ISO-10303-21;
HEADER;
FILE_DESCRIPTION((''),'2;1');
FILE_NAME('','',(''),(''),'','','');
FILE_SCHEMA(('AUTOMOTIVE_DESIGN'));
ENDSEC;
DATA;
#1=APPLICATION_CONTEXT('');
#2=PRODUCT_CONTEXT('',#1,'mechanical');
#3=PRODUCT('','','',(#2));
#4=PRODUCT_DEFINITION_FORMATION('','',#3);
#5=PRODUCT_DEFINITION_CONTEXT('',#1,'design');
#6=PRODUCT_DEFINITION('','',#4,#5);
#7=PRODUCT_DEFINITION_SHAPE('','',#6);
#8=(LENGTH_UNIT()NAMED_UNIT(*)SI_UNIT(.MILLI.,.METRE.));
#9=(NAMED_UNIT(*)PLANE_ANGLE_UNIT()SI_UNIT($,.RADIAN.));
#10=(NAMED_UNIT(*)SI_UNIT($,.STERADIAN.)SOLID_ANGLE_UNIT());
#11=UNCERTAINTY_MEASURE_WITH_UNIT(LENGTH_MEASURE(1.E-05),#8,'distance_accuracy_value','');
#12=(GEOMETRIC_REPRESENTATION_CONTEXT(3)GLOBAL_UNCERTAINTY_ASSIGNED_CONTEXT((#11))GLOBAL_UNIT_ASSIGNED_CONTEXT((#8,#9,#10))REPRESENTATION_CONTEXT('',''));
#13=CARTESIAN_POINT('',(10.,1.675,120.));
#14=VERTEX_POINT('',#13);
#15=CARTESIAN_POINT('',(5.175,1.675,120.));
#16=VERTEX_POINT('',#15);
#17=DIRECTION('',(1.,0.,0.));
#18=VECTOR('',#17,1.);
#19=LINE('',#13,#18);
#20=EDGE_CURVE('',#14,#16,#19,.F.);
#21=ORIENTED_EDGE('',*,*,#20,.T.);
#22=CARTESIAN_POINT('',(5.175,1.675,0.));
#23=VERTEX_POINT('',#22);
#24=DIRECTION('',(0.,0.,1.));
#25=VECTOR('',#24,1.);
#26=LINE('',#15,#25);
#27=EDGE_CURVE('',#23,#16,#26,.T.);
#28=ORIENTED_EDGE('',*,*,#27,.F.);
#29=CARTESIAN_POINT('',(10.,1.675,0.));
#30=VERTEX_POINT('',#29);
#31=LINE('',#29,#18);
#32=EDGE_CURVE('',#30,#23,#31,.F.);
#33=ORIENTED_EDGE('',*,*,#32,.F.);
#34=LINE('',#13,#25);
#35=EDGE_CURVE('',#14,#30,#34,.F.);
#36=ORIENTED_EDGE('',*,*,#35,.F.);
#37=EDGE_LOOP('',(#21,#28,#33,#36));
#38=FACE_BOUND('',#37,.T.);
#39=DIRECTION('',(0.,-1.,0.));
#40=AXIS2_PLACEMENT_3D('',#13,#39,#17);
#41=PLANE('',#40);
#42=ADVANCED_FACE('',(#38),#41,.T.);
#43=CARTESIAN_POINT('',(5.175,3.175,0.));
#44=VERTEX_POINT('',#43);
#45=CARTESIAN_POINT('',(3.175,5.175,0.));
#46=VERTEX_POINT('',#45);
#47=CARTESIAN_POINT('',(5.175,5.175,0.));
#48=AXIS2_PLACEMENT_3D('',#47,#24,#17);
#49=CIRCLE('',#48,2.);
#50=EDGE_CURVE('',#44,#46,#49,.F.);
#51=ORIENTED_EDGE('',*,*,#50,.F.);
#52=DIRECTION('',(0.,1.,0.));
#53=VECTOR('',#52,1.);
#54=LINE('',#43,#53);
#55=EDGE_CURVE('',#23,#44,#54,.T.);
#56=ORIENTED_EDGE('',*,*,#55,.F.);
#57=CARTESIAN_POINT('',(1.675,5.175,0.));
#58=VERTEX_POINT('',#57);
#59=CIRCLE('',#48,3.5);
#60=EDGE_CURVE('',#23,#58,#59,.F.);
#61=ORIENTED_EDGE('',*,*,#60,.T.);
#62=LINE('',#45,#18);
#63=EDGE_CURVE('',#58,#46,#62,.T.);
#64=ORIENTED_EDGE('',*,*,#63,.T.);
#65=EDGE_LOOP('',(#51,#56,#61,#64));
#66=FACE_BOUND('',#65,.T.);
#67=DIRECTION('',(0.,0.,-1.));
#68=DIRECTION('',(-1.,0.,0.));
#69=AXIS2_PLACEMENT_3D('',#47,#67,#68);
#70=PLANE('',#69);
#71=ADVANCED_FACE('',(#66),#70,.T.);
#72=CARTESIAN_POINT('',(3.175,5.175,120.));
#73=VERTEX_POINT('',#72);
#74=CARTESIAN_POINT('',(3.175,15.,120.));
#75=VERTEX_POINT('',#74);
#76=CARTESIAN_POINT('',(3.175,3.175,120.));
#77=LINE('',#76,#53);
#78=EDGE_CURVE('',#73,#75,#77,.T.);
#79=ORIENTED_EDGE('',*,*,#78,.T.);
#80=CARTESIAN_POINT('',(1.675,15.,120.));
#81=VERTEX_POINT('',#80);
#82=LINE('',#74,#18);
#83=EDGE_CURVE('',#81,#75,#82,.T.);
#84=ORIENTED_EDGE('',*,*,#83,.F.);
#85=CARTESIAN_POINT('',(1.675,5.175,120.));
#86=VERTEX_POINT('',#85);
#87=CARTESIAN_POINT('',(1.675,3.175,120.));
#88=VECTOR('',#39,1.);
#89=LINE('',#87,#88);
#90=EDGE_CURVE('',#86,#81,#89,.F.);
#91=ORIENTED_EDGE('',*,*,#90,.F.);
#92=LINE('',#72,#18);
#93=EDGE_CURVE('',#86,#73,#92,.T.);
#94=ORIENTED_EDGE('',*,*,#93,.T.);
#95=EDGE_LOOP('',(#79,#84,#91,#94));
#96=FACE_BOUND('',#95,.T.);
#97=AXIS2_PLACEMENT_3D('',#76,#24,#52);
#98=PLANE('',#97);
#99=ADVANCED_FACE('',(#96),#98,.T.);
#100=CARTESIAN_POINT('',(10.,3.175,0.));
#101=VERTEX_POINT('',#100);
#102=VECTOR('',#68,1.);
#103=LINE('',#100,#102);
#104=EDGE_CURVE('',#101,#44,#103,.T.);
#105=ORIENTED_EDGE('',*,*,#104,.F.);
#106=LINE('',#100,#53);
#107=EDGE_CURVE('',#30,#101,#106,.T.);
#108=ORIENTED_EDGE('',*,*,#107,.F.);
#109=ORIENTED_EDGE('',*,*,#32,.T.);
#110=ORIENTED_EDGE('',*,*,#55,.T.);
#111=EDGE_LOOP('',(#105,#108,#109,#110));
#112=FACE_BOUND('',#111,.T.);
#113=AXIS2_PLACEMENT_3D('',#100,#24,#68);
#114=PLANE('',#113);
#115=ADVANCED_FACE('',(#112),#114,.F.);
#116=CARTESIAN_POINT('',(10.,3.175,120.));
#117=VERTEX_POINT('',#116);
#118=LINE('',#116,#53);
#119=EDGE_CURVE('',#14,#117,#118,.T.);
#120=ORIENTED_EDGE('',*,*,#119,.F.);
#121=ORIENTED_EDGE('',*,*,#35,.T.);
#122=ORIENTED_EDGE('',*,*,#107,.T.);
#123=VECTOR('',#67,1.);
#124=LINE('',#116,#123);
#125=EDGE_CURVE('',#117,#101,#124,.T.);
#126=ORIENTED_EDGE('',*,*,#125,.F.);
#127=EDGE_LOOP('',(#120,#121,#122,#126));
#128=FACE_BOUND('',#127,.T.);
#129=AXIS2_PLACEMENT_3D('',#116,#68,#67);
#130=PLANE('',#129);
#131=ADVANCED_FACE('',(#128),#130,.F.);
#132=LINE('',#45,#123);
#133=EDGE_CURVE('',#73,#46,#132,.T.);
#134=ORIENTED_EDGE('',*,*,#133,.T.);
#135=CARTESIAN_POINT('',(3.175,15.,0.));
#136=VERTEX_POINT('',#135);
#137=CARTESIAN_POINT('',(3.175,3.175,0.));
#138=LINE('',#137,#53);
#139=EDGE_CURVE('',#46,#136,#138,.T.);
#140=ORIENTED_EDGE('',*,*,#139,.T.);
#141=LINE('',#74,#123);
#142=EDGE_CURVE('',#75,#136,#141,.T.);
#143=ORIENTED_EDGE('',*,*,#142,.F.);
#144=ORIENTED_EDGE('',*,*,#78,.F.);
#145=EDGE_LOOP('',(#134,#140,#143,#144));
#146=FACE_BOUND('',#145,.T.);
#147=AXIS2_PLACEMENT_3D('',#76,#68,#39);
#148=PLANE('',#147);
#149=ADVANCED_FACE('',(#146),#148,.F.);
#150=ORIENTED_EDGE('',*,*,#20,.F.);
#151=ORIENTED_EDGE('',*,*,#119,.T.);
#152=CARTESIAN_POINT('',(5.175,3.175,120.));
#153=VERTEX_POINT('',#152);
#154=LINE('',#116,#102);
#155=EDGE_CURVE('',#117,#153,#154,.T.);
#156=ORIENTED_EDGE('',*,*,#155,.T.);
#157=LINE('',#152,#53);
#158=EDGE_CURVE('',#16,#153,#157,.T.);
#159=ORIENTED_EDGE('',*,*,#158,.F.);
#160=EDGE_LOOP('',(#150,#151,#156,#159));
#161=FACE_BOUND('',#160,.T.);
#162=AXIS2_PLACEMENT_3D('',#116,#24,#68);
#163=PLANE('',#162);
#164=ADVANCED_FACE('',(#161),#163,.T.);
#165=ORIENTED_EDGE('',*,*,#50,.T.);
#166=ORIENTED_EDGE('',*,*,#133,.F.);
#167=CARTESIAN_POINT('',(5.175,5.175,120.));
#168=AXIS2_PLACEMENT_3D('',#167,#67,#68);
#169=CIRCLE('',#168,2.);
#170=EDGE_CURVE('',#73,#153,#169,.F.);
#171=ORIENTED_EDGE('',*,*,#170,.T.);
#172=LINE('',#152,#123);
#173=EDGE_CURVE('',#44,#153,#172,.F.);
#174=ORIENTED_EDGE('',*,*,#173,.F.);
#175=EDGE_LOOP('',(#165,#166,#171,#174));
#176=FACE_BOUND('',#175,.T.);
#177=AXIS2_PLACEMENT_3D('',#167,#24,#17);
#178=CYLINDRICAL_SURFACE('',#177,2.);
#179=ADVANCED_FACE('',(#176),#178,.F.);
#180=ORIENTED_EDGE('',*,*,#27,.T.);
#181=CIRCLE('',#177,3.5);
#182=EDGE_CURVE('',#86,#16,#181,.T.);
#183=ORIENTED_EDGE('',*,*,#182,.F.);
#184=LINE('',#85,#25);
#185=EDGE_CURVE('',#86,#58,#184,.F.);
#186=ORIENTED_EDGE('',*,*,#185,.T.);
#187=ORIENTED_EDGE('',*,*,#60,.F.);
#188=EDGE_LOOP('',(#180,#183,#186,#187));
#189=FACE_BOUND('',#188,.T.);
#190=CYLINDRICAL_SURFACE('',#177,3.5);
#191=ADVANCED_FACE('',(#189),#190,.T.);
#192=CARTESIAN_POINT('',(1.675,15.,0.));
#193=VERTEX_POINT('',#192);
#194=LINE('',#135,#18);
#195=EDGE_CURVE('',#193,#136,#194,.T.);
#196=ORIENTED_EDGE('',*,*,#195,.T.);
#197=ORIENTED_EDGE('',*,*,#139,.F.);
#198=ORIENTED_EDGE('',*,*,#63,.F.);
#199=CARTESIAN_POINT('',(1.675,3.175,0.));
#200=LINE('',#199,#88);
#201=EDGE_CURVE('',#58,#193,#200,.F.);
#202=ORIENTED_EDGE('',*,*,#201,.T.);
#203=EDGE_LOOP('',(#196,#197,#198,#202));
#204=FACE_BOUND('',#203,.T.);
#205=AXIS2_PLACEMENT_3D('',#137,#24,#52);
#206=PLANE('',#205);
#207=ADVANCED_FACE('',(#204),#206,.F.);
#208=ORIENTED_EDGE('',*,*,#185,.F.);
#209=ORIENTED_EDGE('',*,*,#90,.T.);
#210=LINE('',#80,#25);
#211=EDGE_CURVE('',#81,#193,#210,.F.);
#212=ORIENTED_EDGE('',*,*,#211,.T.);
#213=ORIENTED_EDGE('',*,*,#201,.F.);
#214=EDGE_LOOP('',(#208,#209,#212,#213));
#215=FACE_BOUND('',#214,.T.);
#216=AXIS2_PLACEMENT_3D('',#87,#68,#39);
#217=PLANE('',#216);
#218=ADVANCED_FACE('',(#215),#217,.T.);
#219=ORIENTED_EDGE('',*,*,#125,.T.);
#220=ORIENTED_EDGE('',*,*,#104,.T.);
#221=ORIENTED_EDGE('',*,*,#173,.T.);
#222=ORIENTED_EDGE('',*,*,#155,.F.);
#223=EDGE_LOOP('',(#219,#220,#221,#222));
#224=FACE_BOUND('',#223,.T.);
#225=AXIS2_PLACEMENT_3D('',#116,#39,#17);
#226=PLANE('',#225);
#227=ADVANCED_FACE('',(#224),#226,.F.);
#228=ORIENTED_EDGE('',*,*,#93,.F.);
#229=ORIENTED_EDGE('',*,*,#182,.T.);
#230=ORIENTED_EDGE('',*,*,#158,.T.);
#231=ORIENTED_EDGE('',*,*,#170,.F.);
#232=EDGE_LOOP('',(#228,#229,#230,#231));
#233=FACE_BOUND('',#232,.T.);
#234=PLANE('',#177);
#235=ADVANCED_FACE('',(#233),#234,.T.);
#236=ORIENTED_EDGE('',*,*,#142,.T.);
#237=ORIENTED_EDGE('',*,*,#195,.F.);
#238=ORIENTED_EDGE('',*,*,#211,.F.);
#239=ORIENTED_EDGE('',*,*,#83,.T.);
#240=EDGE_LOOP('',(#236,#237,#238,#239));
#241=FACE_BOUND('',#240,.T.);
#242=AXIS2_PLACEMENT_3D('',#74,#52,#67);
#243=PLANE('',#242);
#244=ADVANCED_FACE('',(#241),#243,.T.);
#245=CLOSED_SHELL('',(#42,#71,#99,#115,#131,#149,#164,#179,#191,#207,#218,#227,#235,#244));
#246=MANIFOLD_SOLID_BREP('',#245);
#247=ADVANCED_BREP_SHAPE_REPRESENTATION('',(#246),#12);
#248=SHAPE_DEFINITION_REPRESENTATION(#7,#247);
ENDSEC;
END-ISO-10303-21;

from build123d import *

# Parameters (mm, degrees)
BOSS_EXTRUDE1_DEPTH    = 120
CONVERT_SOLID1_DEPTH   = 120
CONVERT_SOLID1_2_DEPTH = 120


# Read off the part's stored shape, not the designer's step: Convert-Solid1
with BuildPart() as part:
    # Sketch1 → Boss-Extrude1 (new body)
    with BuildSketch(Plane.XY):
        Polygon((0, 15), (0, 0), (10, 0), (10, 3.175), (3.175, 3.175), (3.175, 15), align=None)
    extrude(amount=BOSS_EXTRUDE1_DEPTH)

    # Convert-Solid1 outline → Convert-Solid1 (cut)
    with BuildSketch(Plane.XY):
        with BuildLine():
            Line((1.675, 5.175), (1.675, 15))
            Line((1.675, 15), (0, 15))
            Line((0, 15), (0, 0))
            Line((0, 0), (10, 0))
            Line((10, 0), (10, 1.675))
            Line((10, 1.675), (5.175, 1.675))
            ThreePointArc((5.175, 1.675), (2.700126266, 2.700126266), (1.675, 5.175))
        make_face()
    extrude(amount=CONVERT_SOLID1_DEPTH, mode=Mode.SUBTRACT)

    # Convert-Solid1 2 outline → Convert-Solid1 2 (add)
    with BuildSketch(Plane.XY):
        with BuildLine():
            ThreePointArc((5.175, 3.175), (3.760786438, 3.760786438), (3.175, 5.175))
            Line((3.175, 5.175), (3.175, 3.175))
            Line((3.175, 3.175), (5.175, 3.175))
        make_face()
    extrude(amount=CONVERT_SOLID1_2_DEPTH)


solid = part.part
